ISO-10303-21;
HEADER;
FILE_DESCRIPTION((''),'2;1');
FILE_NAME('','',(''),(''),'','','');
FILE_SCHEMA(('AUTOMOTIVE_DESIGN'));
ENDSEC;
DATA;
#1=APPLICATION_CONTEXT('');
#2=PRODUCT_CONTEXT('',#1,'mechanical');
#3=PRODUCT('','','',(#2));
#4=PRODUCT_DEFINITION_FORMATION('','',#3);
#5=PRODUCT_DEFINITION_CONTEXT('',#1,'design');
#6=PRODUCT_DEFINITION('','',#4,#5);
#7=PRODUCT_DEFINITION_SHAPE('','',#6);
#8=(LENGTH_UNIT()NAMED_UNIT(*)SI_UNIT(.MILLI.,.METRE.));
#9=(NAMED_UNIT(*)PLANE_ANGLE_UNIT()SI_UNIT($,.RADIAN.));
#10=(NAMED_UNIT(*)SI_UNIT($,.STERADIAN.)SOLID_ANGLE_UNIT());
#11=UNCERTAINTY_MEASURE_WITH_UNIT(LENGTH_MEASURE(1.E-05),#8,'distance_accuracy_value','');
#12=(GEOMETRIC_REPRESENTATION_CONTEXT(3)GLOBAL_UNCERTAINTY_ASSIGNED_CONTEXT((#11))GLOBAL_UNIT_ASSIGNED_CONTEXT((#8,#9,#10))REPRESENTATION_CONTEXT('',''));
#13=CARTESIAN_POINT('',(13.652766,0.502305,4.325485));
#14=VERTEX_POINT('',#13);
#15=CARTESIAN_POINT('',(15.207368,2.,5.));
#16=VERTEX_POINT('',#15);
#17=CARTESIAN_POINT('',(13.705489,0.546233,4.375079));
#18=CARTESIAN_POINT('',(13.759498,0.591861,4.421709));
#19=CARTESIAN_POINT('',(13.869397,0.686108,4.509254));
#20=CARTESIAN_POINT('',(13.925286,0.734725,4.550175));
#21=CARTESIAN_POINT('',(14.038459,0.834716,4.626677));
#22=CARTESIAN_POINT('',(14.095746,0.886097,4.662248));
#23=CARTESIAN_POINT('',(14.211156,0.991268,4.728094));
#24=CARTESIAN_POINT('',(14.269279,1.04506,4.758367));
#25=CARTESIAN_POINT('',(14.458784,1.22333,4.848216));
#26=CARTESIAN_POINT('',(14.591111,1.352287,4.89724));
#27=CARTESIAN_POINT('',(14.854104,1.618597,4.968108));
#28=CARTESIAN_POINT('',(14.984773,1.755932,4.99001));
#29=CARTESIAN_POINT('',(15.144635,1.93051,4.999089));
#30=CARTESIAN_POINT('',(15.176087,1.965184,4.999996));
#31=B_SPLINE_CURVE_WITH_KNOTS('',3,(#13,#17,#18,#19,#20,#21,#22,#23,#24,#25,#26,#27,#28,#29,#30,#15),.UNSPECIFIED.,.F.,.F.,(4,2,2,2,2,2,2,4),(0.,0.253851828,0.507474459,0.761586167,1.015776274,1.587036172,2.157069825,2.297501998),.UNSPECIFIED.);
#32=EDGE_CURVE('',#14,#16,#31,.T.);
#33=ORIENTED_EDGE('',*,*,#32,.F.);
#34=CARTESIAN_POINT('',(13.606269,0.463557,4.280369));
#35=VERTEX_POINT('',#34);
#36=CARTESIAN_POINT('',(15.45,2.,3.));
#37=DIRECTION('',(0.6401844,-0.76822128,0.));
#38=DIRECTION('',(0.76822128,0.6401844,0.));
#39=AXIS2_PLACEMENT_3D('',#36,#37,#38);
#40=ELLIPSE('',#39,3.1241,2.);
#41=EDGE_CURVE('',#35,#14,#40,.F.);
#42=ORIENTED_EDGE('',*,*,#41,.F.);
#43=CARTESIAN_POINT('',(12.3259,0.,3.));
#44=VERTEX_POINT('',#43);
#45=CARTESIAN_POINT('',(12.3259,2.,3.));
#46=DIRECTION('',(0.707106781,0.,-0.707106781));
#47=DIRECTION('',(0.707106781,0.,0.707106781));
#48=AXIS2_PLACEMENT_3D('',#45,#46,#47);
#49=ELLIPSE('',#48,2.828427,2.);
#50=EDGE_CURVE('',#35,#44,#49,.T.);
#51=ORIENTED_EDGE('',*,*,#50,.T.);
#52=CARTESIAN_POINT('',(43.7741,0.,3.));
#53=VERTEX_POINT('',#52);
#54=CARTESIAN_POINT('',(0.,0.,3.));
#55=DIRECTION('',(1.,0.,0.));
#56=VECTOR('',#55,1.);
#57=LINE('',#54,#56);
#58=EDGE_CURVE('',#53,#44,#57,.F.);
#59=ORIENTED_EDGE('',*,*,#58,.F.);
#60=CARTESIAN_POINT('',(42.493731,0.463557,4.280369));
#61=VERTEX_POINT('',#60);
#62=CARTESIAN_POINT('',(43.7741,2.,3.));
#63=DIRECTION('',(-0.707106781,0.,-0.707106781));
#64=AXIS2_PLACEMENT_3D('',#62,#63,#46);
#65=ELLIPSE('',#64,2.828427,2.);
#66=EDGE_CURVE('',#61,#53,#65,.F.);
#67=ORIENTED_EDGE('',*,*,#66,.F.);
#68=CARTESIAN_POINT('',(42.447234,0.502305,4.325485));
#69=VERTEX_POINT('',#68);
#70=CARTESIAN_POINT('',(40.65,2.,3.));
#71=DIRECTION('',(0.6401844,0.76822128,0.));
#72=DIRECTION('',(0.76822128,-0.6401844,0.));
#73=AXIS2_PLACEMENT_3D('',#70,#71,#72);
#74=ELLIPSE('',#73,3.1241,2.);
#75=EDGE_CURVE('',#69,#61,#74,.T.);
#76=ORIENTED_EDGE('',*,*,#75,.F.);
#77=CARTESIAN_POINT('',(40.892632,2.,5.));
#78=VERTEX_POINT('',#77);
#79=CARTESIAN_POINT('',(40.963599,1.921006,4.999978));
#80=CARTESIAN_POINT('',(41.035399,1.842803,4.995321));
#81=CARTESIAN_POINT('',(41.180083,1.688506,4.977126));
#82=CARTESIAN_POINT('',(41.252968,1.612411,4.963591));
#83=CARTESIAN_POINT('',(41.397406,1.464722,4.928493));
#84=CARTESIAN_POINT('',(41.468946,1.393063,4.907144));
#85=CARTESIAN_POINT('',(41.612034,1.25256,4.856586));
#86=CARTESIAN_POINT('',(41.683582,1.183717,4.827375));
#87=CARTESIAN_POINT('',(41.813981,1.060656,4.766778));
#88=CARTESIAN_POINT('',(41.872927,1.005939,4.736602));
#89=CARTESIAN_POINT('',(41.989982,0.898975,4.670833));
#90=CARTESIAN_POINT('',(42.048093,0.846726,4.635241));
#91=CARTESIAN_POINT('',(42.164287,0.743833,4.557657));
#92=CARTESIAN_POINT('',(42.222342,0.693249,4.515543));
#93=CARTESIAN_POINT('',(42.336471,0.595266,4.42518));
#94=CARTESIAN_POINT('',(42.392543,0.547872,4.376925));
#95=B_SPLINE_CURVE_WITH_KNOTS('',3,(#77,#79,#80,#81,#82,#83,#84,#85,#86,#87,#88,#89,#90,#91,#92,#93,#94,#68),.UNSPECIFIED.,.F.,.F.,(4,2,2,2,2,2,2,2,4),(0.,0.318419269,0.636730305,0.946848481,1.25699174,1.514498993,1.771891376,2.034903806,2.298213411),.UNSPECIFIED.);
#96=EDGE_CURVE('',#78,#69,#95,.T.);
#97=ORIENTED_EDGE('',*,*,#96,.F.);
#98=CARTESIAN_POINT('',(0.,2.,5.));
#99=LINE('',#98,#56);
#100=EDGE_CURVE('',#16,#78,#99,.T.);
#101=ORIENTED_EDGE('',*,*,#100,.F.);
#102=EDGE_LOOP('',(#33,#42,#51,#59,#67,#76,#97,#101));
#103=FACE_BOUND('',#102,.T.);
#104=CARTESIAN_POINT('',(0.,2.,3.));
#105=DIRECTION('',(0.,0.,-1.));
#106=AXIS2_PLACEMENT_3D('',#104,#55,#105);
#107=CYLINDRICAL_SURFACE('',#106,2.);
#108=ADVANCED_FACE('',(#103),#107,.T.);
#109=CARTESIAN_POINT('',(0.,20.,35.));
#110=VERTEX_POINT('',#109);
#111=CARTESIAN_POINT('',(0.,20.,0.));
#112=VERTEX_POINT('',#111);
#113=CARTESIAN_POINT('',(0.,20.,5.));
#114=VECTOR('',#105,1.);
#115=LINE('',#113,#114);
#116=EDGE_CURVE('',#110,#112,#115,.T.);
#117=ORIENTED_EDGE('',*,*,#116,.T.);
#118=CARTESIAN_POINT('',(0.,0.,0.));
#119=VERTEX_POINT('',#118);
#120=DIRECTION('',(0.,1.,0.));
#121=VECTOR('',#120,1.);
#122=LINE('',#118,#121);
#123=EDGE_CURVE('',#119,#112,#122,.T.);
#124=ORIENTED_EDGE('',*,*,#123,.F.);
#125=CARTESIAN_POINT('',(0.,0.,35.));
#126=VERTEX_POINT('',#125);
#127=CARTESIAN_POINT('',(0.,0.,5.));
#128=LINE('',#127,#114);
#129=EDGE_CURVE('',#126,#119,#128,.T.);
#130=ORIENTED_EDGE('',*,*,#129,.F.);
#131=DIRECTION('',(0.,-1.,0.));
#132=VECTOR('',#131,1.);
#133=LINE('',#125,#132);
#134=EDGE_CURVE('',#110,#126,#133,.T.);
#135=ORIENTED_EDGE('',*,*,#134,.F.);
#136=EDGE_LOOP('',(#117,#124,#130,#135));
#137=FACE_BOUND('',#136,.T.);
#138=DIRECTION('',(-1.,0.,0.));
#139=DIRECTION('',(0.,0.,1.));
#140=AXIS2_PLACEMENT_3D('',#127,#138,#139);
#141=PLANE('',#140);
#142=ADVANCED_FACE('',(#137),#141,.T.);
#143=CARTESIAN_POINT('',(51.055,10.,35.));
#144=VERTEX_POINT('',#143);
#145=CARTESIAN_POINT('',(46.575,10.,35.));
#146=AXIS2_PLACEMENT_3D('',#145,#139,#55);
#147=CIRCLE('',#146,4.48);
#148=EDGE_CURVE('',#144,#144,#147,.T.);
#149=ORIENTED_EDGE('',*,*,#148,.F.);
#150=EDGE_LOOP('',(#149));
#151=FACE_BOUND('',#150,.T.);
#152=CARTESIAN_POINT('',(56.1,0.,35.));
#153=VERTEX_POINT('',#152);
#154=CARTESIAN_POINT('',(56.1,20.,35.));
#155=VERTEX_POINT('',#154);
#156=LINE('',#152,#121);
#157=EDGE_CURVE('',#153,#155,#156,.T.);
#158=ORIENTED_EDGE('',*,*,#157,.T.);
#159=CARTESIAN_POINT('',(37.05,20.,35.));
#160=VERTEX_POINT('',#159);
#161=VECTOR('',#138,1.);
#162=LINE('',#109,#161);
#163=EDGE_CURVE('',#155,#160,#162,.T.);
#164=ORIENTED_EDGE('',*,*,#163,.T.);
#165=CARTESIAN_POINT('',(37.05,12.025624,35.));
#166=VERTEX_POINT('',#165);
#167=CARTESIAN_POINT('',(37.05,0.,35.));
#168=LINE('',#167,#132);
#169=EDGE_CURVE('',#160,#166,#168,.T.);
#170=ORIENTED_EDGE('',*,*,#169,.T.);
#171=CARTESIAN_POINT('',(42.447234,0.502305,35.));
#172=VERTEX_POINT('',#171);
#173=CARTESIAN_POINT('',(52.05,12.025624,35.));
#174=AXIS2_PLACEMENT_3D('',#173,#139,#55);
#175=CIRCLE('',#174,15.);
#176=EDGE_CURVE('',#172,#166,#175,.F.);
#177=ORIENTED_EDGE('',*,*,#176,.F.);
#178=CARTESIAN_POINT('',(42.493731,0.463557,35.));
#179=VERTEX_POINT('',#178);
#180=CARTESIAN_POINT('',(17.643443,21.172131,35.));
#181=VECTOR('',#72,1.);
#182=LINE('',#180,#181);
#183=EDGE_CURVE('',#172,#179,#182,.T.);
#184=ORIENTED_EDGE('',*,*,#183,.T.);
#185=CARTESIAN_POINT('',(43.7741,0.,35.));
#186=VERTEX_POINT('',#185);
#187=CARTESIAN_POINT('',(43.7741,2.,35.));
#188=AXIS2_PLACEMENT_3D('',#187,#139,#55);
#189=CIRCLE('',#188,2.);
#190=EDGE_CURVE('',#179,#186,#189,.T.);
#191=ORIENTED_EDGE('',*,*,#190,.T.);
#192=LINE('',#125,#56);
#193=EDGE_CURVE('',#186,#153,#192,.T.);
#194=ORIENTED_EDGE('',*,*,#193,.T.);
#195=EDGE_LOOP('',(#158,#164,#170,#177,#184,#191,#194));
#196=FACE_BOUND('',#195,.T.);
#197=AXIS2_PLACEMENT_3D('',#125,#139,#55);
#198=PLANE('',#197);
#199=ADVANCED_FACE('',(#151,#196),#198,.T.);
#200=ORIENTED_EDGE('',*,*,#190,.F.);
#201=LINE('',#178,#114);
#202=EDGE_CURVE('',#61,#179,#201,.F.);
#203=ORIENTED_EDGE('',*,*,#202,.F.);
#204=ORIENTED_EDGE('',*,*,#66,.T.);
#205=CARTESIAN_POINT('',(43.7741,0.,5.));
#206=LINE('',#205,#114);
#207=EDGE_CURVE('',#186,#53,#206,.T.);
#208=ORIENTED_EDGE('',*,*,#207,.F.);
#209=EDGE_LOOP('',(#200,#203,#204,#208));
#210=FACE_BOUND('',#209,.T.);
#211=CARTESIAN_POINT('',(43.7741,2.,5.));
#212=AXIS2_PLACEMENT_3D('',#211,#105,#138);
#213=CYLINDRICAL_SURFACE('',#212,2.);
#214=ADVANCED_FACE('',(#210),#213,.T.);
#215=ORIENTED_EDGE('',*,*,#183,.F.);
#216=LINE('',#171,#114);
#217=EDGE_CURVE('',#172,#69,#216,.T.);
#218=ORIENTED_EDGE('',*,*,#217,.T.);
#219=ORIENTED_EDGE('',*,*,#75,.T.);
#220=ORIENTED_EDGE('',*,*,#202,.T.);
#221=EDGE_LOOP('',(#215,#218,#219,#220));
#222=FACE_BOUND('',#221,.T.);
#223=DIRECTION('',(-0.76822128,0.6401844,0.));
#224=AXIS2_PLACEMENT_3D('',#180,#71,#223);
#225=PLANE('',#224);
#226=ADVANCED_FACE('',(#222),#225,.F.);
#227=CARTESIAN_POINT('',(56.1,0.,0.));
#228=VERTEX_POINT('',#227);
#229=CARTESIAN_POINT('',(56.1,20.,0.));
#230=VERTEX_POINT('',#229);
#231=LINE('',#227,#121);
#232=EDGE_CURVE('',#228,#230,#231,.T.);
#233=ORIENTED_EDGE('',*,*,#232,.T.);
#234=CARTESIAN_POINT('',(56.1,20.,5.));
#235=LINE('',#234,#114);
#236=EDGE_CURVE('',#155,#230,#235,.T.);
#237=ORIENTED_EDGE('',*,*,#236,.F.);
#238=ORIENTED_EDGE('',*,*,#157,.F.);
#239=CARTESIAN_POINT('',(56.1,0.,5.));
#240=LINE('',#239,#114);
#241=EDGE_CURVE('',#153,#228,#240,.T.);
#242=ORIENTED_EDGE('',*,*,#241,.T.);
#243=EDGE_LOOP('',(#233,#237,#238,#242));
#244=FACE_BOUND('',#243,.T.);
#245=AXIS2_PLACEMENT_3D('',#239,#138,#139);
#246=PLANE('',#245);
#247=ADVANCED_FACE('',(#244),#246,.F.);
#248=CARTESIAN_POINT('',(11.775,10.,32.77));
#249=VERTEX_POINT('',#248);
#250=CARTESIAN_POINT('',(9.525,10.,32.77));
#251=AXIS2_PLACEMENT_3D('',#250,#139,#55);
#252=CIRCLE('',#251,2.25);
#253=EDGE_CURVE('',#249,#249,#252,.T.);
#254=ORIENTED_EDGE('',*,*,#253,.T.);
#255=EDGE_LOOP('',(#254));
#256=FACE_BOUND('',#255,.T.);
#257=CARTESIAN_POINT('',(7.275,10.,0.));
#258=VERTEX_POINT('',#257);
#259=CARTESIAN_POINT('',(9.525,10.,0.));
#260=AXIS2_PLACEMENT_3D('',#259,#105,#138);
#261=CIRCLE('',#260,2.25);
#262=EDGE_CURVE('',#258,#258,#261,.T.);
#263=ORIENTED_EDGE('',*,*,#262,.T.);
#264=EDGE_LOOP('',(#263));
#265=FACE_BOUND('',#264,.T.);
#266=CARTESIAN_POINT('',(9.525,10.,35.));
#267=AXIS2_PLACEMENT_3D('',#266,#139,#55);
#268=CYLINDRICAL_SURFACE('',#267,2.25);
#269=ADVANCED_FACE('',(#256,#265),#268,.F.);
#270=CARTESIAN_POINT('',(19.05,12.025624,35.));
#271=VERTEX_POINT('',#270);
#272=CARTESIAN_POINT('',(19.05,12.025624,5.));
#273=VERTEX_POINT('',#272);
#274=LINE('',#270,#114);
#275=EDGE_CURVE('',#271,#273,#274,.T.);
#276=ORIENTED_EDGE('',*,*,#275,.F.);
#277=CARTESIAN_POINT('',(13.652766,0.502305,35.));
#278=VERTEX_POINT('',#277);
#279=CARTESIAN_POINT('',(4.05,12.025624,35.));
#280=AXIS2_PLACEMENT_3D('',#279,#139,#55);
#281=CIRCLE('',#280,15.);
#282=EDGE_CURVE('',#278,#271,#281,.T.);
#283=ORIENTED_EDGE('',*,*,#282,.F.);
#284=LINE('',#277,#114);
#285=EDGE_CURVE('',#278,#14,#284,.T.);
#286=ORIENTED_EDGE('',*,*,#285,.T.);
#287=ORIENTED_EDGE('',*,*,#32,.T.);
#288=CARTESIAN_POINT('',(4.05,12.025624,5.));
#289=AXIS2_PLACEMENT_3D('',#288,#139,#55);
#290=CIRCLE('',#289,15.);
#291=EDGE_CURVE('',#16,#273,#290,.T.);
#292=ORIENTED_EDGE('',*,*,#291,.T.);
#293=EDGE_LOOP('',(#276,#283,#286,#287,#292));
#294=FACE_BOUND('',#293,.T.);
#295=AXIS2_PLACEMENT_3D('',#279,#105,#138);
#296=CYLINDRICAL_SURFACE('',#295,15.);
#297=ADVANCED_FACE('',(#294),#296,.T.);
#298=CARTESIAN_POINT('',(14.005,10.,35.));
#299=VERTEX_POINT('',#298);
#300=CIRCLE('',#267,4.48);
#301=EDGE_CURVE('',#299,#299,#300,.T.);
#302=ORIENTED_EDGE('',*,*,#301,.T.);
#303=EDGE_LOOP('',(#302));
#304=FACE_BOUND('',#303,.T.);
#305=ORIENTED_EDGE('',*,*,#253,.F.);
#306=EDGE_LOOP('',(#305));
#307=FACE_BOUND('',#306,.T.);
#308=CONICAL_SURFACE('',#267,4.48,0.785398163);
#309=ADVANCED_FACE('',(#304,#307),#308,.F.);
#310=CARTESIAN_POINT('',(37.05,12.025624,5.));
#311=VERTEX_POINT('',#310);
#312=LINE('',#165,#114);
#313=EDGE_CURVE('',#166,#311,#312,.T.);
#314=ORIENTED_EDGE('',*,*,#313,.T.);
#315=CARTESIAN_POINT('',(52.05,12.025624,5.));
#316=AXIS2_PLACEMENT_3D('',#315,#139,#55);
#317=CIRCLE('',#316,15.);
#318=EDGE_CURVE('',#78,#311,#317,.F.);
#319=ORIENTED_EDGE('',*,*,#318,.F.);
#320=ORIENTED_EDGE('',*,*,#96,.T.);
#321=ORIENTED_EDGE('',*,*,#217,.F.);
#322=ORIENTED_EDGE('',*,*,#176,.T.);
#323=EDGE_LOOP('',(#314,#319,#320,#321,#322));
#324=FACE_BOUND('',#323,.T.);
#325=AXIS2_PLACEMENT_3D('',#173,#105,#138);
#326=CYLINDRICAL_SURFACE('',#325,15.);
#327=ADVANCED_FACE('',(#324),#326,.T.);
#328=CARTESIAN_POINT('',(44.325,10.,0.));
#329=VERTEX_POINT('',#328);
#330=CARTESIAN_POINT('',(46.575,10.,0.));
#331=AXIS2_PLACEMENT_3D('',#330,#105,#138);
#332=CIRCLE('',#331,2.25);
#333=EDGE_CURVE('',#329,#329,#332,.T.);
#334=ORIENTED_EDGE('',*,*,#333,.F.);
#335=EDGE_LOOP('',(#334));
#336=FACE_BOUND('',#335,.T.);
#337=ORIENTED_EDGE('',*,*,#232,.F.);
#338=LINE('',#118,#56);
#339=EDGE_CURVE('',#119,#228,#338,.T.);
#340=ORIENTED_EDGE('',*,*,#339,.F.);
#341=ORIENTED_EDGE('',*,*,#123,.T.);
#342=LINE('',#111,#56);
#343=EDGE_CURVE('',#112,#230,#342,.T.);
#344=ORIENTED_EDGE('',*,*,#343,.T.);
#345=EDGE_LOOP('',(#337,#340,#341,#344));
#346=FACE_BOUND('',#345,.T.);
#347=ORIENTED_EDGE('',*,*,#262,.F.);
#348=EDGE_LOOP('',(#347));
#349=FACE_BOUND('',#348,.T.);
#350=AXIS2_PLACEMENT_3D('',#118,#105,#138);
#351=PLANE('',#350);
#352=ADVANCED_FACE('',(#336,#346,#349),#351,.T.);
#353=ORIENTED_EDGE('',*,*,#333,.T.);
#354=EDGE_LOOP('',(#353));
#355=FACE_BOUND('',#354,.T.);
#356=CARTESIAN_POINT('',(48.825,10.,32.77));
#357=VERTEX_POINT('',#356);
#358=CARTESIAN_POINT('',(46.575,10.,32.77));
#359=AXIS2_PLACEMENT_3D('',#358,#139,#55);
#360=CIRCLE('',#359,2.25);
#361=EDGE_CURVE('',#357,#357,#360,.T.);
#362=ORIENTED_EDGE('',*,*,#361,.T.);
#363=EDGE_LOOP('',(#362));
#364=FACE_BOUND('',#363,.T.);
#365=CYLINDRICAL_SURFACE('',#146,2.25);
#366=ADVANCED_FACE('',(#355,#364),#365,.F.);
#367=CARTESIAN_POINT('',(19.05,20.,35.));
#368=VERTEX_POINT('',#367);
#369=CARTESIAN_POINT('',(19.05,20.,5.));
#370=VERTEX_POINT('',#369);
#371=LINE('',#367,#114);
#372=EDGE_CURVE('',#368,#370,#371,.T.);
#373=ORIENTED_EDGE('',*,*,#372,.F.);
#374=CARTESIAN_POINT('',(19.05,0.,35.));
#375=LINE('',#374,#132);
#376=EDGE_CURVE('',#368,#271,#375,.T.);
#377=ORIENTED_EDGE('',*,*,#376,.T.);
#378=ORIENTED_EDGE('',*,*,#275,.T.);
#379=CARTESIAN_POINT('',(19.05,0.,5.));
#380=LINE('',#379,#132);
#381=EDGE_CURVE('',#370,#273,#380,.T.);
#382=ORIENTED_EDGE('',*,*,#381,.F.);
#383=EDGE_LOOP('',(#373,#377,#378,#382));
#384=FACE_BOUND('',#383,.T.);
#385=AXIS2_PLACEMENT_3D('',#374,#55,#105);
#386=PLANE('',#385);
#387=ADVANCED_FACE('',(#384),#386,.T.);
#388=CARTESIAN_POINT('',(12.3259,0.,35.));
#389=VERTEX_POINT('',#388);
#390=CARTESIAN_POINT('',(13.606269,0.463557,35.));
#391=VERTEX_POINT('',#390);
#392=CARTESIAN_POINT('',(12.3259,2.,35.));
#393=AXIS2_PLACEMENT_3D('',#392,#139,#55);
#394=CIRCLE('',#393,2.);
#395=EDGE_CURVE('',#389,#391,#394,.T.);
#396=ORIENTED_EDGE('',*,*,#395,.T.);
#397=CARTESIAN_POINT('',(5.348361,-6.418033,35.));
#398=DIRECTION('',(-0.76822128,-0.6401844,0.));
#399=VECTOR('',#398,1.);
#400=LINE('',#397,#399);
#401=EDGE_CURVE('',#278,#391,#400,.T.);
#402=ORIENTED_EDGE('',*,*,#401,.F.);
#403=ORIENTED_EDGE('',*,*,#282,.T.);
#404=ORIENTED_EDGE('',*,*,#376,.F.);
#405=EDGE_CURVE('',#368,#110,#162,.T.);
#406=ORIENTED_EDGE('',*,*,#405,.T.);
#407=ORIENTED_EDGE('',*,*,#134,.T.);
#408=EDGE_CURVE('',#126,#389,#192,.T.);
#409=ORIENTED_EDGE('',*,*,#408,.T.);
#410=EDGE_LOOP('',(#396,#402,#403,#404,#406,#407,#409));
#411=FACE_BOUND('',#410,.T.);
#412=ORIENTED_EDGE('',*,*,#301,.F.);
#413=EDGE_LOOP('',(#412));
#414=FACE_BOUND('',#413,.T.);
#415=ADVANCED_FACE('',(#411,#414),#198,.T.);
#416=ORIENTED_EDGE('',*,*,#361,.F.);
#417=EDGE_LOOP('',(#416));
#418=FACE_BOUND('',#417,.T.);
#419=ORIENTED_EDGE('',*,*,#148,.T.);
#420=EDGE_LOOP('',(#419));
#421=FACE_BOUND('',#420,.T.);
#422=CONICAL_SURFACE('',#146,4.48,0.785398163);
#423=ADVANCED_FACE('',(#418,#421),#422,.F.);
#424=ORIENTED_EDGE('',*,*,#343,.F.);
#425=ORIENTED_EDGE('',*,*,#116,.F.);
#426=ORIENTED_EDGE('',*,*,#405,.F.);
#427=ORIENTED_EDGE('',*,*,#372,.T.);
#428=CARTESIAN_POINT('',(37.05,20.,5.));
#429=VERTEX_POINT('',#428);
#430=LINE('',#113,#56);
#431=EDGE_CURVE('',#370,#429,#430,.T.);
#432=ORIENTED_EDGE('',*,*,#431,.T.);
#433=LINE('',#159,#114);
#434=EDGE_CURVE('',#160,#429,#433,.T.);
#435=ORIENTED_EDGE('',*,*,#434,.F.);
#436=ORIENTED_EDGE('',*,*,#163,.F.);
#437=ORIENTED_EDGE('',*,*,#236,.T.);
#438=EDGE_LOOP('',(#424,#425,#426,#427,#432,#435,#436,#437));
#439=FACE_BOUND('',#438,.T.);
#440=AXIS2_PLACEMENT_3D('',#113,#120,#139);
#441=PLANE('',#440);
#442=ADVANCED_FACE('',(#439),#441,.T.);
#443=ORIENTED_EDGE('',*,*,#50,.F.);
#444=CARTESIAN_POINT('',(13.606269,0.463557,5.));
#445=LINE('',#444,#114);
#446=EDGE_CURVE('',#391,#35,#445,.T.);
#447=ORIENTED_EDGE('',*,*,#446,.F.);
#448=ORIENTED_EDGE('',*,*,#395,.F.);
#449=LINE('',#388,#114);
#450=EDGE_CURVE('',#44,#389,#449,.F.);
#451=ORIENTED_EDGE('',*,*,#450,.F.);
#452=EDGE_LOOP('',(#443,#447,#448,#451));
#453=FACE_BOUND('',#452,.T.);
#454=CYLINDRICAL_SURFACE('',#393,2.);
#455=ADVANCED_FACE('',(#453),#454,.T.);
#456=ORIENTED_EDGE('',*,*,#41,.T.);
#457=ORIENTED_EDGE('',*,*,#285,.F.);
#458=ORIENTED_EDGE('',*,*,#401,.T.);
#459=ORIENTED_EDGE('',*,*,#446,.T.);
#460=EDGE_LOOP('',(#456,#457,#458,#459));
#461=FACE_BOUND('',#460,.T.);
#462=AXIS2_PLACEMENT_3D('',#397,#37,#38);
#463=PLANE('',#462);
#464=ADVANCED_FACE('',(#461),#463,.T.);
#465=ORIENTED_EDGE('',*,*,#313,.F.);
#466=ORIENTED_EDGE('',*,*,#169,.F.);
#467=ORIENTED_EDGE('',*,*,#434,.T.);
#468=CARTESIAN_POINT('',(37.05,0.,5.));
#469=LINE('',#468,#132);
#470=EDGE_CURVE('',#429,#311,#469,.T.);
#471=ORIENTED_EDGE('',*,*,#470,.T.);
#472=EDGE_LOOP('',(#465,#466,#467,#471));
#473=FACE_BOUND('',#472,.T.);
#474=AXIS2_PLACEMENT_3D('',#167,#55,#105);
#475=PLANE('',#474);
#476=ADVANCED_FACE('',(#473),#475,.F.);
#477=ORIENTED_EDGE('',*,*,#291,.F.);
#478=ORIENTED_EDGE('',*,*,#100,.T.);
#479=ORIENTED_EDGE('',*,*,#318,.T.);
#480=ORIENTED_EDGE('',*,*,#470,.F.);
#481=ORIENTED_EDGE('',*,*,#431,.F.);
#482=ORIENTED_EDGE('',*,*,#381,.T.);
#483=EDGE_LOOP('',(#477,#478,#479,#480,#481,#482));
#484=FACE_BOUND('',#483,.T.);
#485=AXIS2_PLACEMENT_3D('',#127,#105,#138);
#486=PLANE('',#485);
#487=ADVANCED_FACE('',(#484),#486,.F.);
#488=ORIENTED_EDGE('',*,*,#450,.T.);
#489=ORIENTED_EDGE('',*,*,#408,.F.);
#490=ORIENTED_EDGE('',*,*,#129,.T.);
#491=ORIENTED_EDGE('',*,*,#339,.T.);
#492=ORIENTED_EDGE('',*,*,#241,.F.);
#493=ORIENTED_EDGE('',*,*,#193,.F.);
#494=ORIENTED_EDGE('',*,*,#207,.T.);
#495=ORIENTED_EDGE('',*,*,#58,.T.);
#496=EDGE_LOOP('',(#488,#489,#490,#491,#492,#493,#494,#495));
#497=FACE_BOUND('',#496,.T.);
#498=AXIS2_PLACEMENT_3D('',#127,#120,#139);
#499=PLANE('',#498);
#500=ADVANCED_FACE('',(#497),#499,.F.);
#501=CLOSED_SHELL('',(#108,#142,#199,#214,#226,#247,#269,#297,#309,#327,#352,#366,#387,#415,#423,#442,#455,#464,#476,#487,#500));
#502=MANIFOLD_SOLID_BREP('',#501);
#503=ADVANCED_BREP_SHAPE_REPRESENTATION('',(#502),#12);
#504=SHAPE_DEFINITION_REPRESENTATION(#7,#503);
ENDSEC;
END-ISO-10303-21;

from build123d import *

# Parameters (mm, degrees)
SKETCH_1_W                  = 56.1
SKETCH_1_H                  = 20
EXTRUDE_1_DEPTH             = 5
EXTRUDE_2_DEPTH             = 30
HOLE_WIZARD_M41_D           = 4.5
HOLE_WIZARD_M41_CSINK_D     = 8.96
HOLE_WIZARD_M41_CSINK_ANGLE = 90
FILLET_1_R                  = 2


with BuildPart() as part:
    # Эскиз1 → Бобышка-Вытянуть1 (new body)
    with BuildSketch(Plane.XY):
        with Locations((28.05, 10)):
            Rectangle(SKETCH_1_W, SKETCH_1_H)
    extrude(amount=EXTRUDE_1_DEPTH)

    # Эскиз2 → Бобышка-Вытянуть2 (add)
    with BuildSketch(Plane.XY.offset(5)):
        with BuildLine():
            Line((19.05, 12.02562419), (19.05, 20))
            Line((19.05, 20), (0, 20))
            Line((0, 20), (0, 0))
            Line((0, 0), (13.05, 0))
            Line((13.05, 0), (13.652765995, 0.502304996))
            ThreePointArc((13.652765995, 0.502304996), (17.633841318, 5.663293246), (19.05, 12.02562419))
        make_face()
        with BuildLine():
            Line((56.1, 20), (37.05, 20))
            Line((37.05, 20), (37.05, 12.02562419))
            ThreePointArc((37.05, 12.02562419), (38.466158682, 5.663293246), (42.447234005, 0.502304996))
            Line((42.447234005, 0.502304996), (43.05, 0))
            Line((43.05, 0), (56.1, 0))
            Line((56.1, 0), (56.1, 20))
        make_face()
    extrude(amount=EXTRUDE_2_DEPTH)

    # Зенковка для  винта с потайной головкой с внутренним шестигранником M41 (through all)
    with Locations(Plane(origin=(9.525, 10, 35), x_dir=(1, 0, 0), z_dir=(0, 0, 1))):
        with Locations((0, 0), (37.05, 0)):
            CounterSinkHole(HOLE_WIZARD_M41_D / 2, HOLE_WIZARD_M41_CSINK_D / 2, counter_sink_angle=HOLE_WIZARD_M41_CSINK_ANGLE)

    # Скругление1
    fillet_1_edges = [part.edges().sort_by_distance(p)[0] for p in [
        (28.05, 0, 5),
    ]]
    fillet(fillet_1_edges, radius=FILLET_1_R)
    fillet_1_2_edges = [part.edges().sort_by_distance(p)[0] for p in [
        (13.05, 0, 19),
    ]]
    fillet(fillet_1_2_edges, radius=FILLET_1_R)
    fillet_1_3_edges = [part.edges().sort_by_distance(p)[0] for p in [
        (43.05, 0, 19.000000047),
    ]]
    fillet(fillet_1_3_edges, radius=FILLET_1_R)


solid = part.part
